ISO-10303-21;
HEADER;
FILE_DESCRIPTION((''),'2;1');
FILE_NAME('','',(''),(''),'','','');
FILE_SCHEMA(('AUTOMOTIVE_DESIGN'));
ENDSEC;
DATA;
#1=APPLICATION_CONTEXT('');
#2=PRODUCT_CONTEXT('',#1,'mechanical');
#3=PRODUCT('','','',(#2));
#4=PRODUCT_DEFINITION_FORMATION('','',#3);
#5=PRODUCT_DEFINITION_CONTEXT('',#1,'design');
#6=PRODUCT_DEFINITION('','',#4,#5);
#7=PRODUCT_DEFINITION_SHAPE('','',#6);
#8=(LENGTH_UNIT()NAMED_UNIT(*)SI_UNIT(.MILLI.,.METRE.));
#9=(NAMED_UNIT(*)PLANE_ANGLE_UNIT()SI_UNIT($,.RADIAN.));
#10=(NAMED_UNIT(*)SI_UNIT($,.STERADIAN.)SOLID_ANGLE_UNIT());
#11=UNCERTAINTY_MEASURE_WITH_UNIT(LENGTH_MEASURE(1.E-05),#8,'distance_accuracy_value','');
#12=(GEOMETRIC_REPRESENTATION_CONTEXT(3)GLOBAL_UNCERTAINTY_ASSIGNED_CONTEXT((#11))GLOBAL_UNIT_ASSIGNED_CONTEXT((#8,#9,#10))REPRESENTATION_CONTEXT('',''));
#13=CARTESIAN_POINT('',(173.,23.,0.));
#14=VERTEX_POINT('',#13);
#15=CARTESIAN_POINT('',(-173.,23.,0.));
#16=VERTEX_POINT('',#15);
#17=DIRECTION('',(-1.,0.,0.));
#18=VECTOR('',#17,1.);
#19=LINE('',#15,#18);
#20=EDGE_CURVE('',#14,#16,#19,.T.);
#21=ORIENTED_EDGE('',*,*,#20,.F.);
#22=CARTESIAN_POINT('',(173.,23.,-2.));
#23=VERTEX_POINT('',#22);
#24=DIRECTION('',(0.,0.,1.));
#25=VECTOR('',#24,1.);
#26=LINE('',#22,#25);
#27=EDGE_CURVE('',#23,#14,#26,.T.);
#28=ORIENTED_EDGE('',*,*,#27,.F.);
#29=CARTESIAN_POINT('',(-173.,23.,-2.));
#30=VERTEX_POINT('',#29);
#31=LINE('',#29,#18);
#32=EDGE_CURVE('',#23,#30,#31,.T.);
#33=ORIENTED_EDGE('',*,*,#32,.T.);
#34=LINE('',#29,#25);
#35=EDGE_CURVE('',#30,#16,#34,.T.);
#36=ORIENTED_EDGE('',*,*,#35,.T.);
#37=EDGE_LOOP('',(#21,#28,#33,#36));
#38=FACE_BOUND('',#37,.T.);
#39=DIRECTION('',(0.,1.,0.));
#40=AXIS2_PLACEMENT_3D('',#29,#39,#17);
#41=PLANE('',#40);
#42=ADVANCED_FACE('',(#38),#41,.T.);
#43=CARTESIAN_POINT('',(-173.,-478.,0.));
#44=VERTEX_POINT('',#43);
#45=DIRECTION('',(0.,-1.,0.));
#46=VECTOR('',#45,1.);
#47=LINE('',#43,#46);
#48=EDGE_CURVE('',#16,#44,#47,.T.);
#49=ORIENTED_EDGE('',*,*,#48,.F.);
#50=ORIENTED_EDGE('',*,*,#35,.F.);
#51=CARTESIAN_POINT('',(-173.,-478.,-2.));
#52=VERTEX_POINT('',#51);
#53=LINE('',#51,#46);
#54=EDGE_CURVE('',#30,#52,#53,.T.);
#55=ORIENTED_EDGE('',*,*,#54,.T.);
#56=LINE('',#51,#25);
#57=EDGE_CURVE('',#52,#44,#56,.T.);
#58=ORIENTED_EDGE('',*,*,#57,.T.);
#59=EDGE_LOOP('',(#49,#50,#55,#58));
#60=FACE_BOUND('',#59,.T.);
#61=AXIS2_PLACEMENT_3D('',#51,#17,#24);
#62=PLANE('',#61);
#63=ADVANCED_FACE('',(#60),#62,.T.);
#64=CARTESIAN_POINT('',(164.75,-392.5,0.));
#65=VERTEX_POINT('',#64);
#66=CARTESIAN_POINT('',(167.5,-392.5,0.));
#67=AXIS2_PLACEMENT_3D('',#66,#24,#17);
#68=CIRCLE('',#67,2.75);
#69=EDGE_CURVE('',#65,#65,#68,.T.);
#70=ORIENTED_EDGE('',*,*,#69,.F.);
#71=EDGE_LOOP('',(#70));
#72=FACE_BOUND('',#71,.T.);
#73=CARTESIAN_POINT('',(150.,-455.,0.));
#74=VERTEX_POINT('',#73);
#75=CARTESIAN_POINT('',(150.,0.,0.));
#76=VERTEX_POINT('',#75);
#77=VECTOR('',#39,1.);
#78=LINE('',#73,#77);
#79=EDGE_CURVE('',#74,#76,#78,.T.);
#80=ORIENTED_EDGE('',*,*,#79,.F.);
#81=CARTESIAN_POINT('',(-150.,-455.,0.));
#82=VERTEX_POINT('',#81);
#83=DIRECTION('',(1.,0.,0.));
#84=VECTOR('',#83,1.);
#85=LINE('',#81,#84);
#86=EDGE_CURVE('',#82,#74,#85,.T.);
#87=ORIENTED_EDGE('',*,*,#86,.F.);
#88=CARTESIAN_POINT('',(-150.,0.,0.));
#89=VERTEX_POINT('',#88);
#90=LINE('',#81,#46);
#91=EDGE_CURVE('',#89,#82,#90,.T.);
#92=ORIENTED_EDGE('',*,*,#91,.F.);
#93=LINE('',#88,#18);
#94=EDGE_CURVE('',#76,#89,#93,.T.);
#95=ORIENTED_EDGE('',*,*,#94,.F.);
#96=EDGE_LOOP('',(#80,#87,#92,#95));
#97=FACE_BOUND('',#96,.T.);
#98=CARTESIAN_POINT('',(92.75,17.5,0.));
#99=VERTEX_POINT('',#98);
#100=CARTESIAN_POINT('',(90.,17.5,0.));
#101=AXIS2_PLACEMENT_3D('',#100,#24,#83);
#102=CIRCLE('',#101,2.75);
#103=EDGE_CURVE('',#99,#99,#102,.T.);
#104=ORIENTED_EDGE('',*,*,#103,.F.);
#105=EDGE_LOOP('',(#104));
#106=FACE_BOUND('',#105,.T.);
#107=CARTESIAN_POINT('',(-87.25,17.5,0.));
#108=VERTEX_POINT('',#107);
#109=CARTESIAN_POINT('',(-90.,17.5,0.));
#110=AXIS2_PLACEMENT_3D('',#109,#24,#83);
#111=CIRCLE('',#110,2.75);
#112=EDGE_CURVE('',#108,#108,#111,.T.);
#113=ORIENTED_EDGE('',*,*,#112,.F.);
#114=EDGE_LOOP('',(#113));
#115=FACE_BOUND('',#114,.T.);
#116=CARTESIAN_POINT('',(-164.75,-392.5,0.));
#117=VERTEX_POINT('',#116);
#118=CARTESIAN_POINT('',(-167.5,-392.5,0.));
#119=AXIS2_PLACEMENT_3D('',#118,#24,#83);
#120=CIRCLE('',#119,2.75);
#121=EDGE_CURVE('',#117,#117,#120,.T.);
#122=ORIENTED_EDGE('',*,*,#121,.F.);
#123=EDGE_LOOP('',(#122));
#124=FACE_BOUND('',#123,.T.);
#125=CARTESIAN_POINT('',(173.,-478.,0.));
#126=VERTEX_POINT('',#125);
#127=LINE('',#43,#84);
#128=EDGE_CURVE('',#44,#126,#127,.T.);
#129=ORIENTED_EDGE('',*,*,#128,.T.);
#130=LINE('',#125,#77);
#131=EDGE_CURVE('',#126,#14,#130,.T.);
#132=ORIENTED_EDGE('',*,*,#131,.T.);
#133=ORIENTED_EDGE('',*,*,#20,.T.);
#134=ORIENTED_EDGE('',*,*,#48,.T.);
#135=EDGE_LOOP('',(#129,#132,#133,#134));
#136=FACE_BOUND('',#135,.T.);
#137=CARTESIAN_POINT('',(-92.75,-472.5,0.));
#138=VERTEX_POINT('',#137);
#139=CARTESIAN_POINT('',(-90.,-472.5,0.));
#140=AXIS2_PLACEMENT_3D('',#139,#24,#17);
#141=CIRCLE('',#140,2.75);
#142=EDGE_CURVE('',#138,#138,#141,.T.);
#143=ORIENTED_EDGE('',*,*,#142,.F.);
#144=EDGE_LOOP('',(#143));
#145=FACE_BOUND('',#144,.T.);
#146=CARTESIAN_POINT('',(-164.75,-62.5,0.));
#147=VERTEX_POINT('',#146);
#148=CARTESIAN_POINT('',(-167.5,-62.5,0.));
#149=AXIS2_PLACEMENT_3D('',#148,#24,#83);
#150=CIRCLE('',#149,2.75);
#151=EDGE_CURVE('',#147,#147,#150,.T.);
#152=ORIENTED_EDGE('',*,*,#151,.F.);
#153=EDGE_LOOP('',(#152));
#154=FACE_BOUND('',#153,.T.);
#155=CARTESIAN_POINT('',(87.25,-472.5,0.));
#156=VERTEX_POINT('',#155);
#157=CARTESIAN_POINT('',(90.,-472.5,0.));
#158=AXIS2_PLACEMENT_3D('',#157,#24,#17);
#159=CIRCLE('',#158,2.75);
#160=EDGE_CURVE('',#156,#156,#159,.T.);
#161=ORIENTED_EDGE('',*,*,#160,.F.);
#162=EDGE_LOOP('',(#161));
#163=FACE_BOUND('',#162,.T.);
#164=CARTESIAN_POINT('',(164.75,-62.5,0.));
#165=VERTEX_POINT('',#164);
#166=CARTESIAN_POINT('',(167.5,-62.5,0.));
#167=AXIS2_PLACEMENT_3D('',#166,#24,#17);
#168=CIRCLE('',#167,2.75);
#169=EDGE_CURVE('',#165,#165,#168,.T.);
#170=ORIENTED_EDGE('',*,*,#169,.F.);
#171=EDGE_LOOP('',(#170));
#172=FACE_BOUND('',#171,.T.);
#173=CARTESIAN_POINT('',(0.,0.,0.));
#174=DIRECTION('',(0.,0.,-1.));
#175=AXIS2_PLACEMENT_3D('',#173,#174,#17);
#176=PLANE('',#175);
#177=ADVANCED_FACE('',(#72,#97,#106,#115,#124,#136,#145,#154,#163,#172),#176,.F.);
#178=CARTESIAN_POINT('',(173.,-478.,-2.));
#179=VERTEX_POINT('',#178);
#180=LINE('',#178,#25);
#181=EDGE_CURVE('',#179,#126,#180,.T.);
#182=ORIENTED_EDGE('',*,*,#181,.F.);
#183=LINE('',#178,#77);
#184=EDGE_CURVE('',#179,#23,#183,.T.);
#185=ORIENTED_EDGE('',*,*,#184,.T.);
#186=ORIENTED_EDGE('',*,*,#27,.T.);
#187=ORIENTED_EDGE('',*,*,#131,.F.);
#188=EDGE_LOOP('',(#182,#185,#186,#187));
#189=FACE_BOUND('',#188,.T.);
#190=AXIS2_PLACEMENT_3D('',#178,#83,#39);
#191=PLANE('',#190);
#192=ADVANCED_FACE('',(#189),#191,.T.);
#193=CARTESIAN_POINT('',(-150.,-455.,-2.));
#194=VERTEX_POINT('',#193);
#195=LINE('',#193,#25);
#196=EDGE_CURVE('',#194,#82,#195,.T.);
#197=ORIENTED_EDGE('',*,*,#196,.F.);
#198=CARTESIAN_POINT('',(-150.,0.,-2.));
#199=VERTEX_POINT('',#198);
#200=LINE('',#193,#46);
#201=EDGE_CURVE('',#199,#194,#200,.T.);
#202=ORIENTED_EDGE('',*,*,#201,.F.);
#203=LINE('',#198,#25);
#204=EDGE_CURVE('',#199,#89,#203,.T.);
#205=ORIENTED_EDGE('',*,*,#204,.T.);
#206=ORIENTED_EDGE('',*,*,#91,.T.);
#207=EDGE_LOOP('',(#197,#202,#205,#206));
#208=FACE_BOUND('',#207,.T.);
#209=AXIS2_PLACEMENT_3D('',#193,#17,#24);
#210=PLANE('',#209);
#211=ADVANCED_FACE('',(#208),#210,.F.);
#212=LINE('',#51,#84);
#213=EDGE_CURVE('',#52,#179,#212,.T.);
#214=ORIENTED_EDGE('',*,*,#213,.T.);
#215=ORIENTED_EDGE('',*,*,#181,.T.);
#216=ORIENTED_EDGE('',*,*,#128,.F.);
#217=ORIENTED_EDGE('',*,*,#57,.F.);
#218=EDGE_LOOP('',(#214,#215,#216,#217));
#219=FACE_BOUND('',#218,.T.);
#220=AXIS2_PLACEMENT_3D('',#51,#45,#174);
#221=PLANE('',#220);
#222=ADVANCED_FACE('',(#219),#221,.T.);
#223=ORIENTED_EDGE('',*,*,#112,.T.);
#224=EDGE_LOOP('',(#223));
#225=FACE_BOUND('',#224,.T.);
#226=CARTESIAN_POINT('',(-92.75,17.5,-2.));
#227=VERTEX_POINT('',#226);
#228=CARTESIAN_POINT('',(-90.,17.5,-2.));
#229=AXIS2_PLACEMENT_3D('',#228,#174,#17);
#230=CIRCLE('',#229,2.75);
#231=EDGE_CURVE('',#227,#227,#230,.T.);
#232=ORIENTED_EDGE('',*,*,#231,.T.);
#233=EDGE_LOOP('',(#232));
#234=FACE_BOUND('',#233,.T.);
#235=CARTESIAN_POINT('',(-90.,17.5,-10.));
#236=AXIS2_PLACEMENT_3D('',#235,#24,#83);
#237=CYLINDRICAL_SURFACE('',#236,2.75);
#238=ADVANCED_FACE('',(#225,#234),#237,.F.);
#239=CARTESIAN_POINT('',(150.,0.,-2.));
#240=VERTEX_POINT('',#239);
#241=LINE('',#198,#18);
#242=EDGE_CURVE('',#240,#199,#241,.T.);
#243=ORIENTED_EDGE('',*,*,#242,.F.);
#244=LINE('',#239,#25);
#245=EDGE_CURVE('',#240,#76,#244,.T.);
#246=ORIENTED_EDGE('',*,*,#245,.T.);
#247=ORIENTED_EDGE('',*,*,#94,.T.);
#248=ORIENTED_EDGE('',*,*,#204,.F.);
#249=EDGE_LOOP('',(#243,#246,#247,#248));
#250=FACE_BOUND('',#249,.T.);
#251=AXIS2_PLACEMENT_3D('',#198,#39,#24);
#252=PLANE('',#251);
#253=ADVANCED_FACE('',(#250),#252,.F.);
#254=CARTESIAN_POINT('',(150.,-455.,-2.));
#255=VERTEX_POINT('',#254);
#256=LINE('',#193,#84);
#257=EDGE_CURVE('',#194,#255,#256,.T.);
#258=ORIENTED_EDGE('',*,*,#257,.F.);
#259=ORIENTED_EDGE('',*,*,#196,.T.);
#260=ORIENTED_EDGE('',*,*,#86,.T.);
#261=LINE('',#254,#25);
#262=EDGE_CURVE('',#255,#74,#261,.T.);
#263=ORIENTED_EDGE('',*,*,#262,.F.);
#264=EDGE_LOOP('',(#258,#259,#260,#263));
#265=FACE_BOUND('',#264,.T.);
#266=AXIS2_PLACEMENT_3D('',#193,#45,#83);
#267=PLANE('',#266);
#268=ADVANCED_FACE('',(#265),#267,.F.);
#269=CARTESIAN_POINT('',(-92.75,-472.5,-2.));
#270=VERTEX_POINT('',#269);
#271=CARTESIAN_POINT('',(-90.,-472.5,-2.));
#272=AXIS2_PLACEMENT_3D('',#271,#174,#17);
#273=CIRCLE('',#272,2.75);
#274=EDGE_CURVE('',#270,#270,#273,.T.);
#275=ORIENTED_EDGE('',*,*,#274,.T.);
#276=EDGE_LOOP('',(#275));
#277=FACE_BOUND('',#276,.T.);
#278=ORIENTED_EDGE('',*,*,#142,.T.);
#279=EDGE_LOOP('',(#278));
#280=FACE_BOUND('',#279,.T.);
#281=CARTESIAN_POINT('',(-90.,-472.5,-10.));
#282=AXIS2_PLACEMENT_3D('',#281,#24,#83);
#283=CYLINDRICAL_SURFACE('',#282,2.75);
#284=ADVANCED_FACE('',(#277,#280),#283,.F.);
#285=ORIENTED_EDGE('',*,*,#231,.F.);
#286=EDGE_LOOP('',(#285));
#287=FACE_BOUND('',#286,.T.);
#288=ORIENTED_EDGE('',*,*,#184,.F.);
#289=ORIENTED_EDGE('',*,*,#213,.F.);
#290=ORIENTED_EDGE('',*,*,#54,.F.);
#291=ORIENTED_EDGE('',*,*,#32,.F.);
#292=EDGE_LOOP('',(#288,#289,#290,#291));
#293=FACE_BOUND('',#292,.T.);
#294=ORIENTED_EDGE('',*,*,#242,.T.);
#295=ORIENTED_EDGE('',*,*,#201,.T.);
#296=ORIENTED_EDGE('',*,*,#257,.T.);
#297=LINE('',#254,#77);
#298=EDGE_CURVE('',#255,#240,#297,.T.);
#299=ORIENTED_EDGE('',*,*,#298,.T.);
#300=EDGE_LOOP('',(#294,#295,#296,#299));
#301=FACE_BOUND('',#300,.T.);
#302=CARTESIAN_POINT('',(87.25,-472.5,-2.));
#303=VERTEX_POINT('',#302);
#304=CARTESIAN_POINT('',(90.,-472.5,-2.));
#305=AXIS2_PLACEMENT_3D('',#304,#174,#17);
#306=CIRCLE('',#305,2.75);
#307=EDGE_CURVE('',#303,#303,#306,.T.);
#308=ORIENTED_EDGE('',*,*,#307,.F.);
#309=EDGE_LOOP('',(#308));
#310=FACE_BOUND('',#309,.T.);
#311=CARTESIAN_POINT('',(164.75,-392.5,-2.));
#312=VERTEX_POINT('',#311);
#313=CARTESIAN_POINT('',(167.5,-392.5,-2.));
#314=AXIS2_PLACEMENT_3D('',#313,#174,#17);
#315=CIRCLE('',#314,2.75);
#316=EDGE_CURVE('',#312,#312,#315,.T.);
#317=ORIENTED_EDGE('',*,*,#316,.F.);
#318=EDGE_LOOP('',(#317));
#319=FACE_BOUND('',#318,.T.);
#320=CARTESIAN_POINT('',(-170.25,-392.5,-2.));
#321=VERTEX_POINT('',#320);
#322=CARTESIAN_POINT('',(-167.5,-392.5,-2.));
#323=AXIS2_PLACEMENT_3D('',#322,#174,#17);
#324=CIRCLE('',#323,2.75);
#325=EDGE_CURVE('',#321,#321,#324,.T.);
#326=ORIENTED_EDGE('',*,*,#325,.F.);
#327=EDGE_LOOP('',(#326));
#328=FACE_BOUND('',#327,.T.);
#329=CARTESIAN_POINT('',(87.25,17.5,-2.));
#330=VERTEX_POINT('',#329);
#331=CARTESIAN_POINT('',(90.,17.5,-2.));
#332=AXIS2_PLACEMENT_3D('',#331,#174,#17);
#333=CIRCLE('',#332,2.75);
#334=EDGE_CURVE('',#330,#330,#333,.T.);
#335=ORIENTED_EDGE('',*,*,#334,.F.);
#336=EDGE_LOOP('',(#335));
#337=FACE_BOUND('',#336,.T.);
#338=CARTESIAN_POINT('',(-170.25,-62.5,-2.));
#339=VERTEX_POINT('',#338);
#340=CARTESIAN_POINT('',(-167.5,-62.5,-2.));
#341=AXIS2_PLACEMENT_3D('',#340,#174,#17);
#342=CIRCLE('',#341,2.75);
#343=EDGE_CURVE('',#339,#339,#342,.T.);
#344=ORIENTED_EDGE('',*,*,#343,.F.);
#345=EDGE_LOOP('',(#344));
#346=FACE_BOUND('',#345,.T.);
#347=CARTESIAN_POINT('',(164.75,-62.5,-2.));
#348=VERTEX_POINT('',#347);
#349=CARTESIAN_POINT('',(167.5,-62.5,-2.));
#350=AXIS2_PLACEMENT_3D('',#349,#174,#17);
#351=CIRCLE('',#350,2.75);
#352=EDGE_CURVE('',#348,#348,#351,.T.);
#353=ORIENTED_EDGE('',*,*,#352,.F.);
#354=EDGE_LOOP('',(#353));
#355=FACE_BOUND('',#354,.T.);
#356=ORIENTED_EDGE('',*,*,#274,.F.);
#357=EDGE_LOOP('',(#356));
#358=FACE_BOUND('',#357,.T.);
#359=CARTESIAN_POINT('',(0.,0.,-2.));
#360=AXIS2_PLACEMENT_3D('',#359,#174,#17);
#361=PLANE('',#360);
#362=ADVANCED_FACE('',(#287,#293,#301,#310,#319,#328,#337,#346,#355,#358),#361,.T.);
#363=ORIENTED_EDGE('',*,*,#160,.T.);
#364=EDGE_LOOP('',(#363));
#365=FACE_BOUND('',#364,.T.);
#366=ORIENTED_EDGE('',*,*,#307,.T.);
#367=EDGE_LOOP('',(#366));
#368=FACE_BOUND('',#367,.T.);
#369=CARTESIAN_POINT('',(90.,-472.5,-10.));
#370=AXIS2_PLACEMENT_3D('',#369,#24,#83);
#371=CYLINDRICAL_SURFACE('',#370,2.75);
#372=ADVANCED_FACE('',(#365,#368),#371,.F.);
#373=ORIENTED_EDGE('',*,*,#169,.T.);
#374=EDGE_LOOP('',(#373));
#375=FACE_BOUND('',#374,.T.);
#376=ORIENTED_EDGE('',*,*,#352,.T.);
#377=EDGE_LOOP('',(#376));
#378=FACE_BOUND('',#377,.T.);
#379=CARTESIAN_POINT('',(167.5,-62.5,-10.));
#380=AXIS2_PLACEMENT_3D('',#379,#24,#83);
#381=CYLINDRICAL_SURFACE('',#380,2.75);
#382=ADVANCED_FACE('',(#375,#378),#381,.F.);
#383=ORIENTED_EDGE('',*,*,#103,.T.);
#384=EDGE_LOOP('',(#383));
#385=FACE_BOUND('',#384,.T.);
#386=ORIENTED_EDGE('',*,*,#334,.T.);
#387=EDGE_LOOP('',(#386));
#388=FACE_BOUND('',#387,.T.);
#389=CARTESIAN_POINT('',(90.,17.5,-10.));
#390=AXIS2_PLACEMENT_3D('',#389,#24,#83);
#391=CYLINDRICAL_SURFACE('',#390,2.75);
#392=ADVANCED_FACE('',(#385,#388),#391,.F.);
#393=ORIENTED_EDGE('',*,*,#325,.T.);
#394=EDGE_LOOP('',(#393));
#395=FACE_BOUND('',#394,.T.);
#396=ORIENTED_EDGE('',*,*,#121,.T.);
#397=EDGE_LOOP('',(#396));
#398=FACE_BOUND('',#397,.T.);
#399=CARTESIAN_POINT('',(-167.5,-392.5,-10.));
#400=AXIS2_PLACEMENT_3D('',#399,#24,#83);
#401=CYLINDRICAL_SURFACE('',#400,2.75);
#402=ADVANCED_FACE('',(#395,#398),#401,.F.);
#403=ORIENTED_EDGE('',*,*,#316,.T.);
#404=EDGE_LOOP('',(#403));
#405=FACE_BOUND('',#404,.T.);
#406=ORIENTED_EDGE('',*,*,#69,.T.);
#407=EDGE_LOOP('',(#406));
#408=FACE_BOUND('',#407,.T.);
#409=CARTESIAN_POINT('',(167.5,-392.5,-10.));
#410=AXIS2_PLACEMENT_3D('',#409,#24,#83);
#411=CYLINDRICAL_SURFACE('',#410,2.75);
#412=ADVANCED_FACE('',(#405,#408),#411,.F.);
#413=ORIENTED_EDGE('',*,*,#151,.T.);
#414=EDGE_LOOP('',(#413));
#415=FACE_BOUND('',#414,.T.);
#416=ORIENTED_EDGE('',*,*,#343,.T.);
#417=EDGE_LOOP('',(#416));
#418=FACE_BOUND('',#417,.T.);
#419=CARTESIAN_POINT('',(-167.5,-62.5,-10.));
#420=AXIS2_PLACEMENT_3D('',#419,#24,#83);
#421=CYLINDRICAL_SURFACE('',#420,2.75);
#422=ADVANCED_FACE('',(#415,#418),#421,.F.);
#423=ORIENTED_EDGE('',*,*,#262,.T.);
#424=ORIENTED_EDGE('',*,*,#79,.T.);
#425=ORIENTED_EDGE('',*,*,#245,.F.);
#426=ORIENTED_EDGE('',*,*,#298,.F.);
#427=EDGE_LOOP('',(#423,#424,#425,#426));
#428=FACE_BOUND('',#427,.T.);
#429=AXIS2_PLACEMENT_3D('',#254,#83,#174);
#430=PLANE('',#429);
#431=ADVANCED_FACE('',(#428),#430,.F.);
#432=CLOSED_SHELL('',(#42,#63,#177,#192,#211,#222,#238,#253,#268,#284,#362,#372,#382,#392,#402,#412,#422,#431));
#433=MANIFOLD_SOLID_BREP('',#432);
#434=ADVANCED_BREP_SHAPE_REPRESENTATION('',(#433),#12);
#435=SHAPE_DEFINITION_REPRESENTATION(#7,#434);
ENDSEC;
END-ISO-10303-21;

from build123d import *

# Parameters (mm, degrees)
IZIM1_W               = 346
IZIM1_H               = 501
IZIM1_W_2             = 300
IZIM1_H_2             = 455
TABAN_FLAN_1_DEPTH    = 2
IZIM2_R               = 2.75
KES_EKSTR_ZYON1_DEPTH = 10


# Sheet-metal steps are written as plain solids
with BuildPart() as part:
    # Çizim1 → Taban-Flanş1 (new body)
    with BuildSketch(Plane.XY):
        with Locations((0, -227.5)):
            Rectangle(IZIM1_W, IZIM1_H)
        with Locations((0, -227.5)):
            Rectangle(IZIM1_W_2, IZIM1_H_2, mode=Mode.SUBTRACT)
    extrude(amount=-TABAN_FLAN_1_DEPTH)

    # Çizim2 → Kes-Ekstrüzyon1 (cut)
    with BuildSketch(Plane.XY):
        with Locations((90, 17.5)):
            Circle(IZIM2_R)
        with Locations((-90, 17.5)):
            Circle(IZIM2_R)
        with Locations((-167.5, -62.5)):
            Circle(IZIM2_R)
        with Locations((-167.5, -392.5)):
            Circle(IZIM2_R)
        with Locations(Location((167.5, -392.5, 0), (0, 0, 180))):
            Circle(IZIM2_R)
        with Locations(Location((167.5, -62.5, 0), (0, 0, 180))):
            Circle(IZIM2_R)
        with Locations(Location((90, -472.5, 0), (0, 0, 180))):
            Circle(IZIM2_R)
        with Locations(Location((-90, -472.5, 0), (0, 0, 180))):
            Circle(IZIM2_R)
    extrude(amount=-KES_EKSTR_ZYON1_DEPTH, mode=Mode.SUBTRACT)


solid = part.part
